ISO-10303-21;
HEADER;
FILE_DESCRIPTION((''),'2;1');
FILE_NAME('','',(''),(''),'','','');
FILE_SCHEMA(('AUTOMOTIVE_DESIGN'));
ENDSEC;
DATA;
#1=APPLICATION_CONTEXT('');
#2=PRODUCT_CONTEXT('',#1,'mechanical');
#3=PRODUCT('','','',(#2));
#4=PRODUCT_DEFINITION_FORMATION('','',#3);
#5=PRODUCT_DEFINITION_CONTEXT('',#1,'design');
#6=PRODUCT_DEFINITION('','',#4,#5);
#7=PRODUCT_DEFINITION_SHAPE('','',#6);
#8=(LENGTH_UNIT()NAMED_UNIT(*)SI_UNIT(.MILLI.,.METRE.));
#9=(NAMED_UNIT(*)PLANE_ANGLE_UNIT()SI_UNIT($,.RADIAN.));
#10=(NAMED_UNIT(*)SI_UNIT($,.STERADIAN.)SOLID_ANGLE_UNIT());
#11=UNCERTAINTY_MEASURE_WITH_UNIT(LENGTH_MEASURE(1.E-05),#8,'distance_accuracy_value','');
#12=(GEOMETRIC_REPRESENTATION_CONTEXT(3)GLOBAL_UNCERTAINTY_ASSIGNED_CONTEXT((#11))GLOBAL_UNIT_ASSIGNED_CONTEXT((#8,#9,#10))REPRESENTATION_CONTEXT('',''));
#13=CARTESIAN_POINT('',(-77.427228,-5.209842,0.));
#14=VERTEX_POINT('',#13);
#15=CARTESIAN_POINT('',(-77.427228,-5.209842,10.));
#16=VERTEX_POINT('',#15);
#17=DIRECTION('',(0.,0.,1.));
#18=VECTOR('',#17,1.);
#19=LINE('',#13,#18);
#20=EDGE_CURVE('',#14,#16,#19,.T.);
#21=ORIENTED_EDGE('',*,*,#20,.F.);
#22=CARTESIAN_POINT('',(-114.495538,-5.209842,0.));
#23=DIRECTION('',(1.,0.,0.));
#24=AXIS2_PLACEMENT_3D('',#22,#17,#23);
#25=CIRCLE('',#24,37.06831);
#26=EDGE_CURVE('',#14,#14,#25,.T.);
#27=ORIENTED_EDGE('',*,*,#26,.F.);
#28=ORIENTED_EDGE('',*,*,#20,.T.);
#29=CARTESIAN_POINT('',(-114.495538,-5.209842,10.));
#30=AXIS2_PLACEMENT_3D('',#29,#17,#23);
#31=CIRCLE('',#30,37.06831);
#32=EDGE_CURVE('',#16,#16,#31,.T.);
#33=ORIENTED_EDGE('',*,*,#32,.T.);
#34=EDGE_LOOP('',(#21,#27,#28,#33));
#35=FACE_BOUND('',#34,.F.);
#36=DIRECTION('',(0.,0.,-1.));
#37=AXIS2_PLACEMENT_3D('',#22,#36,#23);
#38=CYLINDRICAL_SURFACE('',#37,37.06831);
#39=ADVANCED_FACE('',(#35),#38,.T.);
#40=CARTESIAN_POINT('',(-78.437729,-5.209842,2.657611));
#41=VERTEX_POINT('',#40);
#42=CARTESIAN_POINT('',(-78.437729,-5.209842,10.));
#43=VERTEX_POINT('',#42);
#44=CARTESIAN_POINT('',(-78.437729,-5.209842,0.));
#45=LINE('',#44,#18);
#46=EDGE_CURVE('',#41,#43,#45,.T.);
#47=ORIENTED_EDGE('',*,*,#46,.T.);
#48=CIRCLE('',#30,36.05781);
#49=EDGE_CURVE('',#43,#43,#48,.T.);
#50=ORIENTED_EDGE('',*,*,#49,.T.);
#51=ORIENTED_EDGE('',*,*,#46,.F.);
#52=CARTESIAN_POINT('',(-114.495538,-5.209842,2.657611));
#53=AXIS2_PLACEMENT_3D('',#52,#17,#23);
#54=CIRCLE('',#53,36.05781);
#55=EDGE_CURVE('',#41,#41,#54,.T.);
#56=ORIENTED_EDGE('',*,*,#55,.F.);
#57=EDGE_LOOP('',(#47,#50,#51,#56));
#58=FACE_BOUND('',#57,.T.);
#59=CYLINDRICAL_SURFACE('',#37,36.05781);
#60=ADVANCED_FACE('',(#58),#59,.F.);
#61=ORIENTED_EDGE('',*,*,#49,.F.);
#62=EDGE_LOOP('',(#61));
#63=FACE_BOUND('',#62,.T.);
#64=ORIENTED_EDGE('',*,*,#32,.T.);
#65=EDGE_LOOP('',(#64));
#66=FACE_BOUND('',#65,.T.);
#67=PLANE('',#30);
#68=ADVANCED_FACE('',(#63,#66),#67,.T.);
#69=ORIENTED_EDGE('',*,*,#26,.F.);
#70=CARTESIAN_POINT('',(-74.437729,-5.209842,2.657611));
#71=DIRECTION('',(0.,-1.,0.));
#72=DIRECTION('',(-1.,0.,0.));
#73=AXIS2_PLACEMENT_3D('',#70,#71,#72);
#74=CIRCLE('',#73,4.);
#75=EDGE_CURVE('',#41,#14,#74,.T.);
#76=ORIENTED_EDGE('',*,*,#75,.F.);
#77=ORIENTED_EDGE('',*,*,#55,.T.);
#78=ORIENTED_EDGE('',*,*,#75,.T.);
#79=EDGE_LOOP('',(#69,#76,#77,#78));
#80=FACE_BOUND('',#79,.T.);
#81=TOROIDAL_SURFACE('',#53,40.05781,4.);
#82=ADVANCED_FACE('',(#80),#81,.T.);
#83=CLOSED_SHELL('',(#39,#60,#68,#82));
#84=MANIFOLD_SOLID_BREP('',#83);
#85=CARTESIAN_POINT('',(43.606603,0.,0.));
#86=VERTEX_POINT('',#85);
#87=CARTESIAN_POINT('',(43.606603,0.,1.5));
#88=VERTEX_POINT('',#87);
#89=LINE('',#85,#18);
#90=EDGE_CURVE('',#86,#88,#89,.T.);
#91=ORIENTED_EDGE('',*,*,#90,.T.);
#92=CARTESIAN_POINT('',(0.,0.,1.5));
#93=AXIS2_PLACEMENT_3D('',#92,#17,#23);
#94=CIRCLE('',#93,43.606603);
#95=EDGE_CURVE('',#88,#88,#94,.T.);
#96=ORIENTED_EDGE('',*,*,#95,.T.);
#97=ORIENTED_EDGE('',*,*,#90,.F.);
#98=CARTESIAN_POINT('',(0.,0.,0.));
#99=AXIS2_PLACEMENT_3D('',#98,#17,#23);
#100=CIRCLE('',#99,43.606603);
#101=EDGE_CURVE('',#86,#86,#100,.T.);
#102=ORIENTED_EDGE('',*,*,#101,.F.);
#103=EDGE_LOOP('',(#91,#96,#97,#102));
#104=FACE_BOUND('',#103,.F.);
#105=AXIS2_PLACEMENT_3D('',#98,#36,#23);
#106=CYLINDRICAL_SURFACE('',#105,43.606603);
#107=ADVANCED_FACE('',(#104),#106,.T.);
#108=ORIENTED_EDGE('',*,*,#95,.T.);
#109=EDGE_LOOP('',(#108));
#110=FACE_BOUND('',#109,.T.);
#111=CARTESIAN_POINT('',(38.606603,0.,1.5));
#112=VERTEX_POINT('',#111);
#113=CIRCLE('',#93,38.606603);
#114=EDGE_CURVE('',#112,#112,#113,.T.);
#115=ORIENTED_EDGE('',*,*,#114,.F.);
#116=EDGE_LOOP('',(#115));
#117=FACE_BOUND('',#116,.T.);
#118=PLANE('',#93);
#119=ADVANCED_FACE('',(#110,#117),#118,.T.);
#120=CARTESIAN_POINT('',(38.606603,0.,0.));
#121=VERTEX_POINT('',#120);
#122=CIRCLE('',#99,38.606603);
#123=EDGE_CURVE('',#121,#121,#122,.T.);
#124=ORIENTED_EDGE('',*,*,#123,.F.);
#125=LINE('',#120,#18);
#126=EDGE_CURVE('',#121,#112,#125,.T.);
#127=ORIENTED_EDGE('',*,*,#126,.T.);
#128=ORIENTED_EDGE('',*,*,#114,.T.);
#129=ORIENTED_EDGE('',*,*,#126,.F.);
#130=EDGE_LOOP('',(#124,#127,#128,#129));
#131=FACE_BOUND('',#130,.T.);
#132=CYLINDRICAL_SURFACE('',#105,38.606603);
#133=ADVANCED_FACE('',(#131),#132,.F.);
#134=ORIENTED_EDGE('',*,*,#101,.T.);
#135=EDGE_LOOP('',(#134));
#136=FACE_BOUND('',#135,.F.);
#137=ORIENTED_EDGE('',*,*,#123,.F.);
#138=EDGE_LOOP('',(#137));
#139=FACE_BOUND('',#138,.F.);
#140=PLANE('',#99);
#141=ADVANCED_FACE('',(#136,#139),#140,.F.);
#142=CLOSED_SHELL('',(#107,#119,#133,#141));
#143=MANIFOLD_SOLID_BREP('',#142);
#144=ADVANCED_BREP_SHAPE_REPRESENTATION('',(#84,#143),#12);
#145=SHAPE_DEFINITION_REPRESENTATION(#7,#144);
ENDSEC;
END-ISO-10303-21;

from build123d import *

# Parameters (mm, degrees)
F1_R     = 43.6066034391
F1_R_2   = 38.6066034391
F2_DEPTH = 1.5
F0_R     = 37.0683102398
F0_R_2   = 36.0578095469
F3_DEPTH = 10


# Not quite as in the source:
# - a fillet or chamfer that OpenCascade refuses, or shapes differently, is made with other operations: its cross-section is extruded or revolved along the edge and cut away or added
# - a feature names something its author has since deleted; it is built from what else it names


with BuildPart() as f2:
    # F1 (on Top) → F2 (new body)
    with BuildSketch(Plane.XY):
        Circle(F1_R)
        Circle(F1_R_2, mode=Mode.SUBTRACT)
    extrude(amount=F2_DEPTH)


with BuildPart() as f3:
    # F0 (on Top) → F3 (new body)
    with BuildSketch(Plane.XY):
        with Locations((-114.4955381751, -5.2098422311)):
            Circle(F0_R)
        with Locations((-114.4955381751, -5.2098422311)):
            Circle(F0_R_2, mode=Mode.SUBTRACT)
    extrude(amount=F3_DEPTH)

    # F5: fillet of radius 4 on 1 edges, made by hand

    # F5_s1 → F5_t2 (revolve, cut)
    with BuildSketch(Plane.XZ.offset(5.2098422311)):
        with BuildLine():
            ThreePointArc((-78.4377286282, 2.6576105607), (-78.1765785335, 1.2359912778), (-77.4272279353, 0))
            Line((-77.4272279353, 0), (-78.4377286282, 0))
            Line((-78.4377286282, 0), (-78.4377286282, 2.6576105607))
        make_face()
    revolve(axis=Axis((-114.4955381751, -5.2098422311, 0), (0, 0, 1)), mode=Mode.SUBTRACT)


solid = Compound([f2.part, f3.part])
